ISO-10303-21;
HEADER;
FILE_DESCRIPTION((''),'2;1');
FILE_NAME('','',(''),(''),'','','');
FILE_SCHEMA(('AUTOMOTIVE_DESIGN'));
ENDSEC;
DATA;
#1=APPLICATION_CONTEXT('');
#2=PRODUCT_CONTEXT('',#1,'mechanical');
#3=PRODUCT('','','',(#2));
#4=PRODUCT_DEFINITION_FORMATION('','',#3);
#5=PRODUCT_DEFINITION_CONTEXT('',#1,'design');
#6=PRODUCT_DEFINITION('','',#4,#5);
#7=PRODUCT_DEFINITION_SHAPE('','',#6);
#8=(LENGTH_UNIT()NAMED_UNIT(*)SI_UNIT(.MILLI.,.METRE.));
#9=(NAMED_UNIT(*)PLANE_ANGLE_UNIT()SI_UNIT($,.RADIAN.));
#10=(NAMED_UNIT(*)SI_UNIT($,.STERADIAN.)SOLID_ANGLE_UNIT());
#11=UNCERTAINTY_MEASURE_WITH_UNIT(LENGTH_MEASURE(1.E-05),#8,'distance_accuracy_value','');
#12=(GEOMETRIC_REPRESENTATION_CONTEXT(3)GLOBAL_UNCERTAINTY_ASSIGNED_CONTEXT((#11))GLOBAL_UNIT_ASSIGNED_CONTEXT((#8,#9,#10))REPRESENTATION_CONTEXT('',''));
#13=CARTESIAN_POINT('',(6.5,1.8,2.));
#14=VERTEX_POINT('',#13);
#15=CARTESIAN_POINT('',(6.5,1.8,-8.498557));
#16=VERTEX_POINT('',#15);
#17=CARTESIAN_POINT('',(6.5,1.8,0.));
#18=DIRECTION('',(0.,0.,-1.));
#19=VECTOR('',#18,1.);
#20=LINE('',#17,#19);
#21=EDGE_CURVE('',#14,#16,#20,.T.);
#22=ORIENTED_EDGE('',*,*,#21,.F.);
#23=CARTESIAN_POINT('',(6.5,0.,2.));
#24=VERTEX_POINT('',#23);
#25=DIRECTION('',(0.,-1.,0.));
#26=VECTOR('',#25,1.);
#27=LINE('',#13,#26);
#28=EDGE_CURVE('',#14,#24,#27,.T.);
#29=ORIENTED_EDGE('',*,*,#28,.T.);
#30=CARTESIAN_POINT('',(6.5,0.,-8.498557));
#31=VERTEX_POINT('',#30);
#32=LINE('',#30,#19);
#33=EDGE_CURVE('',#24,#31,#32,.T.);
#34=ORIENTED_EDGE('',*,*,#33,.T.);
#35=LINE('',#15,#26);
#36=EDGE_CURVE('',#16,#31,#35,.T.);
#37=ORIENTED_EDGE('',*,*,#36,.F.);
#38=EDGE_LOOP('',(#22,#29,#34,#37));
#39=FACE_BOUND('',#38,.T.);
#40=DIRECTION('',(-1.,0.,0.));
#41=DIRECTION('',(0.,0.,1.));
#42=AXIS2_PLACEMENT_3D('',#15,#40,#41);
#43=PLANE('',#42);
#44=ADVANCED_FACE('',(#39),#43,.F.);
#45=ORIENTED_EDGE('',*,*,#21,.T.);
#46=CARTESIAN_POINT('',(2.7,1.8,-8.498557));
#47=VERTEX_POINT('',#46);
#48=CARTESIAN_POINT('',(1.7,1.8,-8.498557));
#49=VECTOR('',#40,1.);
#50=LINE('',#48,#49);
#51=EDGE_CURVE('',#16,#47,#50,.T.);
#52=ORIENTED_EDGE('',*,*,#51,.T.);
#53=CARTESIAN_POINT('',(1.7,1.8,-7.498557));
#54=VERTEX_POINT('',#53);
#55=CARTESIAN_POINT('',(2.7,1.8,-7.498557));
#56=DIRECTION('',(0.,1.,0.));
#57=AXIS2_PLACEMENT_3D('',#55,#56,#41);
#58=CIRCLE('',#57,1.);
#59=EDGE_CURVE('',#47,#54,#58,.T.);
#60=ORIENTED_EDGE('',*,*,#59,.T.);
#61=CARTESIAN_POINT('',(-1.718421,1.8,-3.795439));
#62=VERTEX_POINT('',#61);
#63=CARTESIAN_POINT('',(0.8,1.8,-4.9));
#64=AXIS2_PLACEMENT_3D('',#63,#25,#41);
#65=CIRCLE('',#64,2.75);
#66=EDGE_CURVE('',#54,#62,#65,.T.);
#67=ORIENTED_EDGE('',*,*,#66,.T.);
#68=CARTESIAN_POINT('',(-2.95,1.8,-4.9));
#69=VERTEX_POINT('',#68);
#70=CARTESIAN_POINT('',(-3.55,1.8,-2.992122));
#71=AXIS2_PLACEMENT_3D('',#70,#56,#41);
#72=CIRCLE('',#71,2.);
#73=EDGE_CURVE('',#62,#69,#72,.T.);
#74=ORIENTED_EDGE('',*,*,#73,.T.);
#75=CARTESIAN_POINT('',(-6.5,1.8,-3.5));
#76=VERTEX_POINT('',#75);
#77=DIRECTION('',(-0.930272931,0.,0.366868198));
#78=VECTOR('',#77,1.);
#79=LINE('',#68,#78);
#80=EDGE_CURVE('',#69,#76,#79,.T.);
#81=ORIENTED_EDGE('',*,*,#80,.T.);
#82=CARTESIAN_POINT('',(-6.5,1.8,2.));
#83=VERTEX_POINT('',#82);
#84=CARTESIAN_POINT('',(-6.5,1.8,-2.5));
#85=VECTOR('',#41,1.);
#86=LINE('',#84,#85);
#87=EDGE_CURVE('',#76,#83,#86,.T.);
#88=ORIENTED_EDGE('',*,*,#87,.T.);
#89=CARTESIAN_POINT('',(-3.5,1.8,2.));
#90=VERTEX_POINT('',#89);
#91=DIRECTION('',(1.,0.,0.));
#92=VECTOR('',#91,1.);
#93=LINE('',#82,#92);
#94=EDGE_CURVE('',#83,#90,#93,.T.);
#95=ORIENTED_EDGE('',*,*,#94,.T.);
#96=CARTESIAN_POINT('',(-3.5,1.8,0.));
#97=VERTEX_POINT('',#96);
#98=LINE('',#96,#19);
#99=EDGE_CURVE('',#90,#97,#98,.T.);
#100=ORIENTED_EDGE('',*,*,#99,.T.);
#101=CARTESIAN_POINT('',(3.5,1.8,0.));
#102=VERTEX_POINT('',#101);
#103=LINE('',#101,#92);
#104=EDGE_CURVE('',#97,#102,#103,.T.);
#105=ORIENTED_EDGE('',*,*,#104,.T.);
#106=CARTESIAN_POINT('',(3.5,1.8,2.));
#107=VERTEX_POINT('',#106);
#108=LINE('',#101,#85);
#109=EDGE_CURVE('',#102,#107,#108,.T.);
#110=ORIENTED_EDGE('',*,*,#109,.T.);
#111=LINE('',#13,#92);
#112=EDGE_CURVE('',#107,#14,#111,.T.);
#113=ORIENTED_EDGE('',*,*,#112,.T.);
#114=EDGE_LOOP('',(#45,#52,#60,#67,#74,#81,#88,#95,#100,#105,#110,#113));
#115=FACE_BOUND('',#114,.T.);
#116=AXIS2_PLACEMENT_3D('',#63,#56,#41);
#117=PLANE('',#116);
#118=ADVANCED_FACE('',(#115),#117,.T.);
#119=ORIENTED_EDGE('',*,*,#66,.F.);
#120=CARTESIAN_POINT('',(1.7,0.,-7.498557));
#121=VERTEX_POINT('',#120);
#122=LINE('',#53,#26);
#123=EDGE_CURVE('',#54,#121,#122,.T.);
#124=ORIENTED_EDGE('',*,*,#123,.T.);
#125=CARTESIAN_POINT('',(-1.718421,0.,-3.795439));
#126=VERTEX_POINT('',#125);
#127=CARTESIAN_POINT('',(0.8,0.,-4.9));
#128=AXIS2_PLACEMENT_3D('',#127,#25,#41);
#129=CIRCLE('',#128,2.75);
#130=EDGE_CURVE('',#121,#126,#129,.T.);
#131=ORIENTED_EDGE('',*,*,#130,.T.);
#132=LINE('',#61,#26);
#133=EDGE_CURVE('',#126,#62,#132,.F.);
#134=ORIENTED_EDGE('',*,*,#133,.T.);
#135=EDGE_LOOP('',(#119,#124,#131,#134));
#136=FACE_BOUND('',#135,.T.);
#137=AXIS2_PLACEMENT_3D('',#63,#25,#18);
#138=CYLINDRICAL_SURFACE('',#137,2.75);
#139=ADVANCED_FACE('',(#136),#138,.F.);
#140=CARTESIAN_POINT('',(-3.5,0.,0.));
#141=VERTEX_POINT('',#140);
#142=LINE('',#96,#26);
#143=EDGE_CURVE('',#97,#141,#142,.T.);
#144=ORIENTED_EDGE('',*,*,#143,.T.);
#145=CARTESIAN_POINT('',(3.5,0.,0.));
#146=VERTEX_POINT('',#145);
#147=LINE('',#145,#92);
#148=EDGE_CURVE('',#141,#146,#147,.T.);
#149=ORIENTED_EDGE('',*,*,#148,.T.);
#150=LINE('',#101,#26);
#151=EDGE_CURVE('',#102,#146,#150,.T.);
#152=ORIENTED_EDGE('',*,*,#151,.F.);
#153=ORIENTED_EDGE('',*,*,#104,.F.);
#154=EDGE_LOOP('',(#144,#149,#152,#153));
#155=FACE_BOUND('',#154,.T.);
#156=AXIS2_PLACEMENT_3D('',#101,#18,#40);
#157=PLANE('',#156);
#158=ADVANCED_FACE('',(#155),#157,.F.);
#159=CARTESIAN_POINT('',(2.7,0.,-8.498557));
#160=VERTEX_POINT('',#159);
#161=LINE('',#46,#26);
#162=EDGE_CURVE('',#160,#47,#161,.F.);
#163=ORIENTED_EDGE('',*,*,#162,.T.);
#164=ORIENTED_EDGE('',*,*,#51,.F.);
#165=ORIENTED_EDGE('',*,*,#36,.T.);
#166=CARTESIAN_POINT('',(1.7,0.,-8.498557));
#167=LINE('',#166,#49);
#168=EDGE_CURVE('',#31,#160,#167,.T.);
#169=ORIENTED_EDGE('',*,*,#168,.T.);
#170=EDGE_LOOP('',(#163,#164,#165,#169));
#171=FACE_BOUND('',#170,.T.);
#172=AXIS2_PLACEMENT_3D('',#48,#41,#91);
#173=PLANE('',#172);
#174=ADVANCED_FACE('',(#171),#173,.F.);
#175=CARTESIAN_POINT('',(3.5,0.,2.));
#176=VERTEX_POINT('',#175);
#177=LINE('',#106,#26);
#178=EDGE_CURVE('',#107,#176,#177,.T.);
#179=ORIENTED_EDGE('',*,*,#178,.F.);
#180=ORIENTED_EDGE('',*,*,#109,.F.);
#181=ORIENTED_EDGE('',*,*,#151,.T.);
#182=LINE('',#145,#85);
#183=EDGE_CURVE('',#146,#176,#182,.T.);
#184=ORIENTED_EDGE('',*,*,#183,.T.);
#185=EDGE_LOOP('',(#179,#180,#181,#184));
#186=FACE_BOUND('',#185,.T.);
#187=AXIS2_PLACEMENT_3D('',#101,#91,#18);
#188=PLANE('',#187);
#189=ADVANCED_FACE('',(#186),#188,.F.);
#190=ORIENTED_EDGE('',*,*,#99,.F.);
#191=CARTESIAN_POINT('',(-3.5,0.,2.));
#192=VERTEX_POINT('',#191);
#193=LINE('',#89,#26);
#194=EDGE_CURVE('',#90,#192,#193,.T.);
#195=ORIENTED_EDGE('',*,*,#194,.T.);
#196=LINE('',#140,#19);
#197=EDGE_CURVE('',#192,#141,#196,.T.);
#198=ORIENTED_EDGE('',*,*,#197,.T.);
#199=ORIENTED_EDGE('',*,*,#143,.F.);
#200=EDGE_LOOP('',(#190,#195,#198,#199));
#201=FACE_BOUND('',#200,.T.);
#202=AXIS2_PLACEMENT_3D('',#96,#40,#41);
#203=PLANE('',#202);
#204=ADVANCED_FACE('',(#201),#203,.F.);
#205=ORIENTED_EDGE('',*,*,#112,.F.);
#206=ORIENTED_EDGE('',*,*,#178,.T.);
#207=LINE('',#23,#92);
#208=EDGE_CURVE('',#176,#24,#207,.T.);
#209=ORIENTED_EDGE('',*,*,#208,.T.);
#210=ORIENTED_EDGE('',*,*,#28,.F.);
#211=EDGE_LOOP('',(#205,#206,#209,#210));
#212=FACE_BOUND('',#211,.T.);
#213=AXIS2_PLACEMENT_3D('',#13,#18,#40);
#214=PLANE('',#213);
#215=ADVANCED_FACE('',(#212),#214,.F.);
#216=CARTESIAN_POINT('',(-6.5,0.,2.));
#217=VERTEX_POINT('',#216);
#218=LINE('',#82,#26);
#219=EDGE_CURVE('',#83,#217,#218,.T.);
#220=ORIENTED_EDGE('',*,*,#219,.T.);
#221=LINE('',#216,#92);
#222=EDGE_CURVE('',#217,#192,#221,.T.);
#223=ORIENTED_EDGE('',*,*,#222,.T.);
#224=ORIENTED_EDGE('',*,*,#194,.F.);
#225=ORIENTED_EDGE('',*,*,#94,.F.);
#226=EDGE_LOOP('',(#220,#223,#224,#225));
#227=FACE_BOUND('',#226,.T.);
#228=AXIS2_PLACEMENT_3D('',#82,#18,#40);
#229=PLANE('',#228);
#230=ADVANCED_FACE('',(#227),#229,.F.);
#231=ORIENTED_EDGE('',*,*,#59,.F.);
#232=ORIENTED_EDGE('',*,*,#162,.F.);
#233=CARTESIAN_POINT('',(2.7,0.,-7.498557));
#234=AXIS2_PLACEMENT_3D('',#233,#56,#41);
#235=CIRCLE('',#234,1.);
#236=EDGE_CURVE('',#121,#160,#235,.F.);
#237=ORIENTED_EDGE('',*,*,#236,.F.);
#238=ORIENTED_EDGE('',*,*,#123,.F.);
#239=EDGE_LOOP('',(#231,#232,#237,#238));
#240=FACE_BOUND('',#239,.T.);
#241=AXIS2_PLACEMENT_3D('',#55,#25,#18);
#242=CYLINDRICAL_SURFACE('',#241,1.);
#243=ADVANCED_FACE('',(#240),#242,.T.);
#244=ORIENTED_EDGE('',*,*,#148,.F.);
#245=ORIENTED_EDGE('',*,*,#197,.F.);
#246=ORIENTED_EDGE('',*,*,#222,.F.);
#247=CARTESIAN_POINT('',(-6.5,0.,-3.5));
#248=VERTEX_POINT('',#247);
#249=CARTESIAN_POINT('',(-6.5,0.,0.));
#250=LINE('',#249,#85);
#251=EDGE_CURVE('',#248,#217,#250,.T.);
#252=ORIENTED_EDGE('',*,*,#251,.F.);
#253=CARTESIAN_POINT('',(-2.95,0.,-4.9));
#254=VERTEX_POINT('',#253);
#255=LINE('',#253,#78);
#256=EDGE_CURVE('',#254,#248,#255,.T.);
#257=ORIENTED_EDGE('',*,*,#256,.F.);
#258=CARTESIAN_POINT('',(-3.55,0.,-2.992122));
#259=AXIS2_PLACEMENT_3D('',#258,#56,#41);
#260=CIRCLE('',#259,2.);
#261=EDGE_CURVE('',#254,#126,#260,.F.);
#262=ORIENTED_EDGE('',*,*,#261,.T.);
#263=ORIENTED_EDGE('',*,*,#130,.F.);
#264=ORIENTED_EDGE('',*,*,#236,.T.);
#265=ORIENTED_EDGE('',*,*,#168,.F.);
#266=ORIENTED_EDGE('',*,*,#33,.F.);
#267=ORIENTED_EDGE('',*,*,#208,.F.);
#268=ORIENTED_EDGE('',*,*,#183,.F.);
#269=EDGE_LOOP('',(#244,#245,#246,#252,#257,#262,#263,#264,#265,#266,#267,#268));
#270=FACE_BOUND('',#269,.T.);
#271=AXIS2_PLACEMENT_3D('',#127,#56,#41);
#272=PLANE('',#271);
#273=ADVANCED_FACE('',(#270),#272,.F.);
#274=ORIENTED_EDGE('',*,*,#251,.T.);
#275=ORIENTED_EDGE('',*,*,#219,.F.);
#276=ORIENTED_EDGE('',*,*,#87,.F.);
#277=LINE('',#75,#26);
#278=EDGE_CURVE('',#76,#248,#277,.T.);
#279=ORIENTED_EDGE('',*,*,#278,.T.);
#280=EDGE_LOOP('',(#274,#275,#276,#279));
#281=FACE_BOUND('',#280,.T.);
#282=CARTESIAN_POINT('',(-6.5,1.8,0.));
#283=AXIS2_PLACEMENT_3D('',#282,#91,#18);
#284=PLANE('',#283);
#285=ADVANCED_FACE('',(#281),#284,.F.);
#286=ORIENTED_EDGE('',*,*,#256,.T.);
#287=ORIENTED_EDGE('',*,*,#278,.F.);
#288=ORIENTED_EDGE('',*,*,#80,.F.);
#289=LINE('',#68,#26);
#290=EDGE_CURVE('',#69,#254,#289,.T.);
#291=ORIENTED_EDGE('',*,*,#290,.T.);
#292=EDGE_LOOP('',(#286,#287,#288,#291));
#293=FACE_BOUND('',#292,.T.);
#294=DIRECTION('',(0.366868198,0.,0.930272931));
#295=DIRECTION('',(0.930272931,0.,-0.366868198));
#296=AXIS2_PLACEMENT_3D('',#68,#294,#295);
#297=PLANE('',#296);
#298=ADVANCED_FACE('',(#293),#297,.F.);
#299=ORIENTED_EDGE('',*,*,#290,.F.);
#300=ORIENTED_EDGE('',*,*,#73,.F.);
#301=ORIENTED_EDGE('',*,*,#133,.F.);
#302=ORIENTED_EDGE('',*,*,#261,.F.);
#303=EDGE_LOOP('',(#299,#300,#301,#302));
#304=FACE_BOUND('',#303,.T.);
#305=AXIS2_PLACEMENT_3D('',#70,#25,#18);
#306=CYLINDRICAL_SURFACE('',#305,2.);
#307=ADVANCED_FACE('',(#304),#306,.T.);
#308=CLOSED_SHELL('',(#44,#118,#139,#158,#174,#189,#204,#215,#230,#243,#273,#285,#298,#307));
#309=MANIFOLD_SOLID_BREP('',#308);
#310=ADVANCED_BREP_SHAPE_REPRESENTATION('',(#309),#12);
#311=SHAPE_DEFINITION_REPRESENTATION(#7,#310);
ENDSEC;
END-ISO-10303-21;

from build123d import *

# Parameters (mm, degrees)
BOSS_EXTRUDE1_DEPTH = 1.8
FILLET1_R           = 2
FILLET3_R           = 1


# Some blends are built 0.0001 mm under size
with BuildPart() as part:
    # Sketch1 → Boss-Extrude1 (new body)
    with BuildSketch(Plane(origin=(0, 0, 0), x_dir=(1, 0, 0), z_dir=(0, 1, 0))):
        with BuildLine():
            Line((6.5, 2.5), (6.5, 0))
            Line((6.5, 0), (6.5, -2))
            Line((6.5, -2), (3.5, -2))
            Line((3.5, -2), (3.5, 0))
            Line((3.5, 0), (-3.5, 0))
            Line((-3.5, 0), (-3.5, -2))
            Line((-3.5, -2), (-6.5, -2))
            Line((-6.5, -2), (-6.5, 0))
            Line((-6.5, 0), (-6.5, 2.5))
            Line((-6.5, 2.5), (-6.5, 3.5))
            Line((-6.5, 3.5), (-2.95, 4.9))
            Line((-2.95, 4.9), (-1.95, 4.9))
            ThreePointArc((-1.95, 4.9), (0.286343304, 2.198397365), (3.358114035, 3.890766339))
            ThreePointArc((3.358114035, 3.890766339), (3.298735092, 6.048400165), (1.7, 7.498557292))
            Line((1.7, 7.498557292), (1.7, 8.498557292))
            Line((1.7, 8.498557292), (6.5, 8.498557292))
            Line((6.5, 8.498557292), (6.5, 4.9))
            Line((6.5, 4.9), (6.5, 2.5))
        make_face()
    extrude(amount=BOSS_EXTRUDE1_DEPTH)

    # Fillet1
    # the kernel refuses this fillet: 2 mm, written as the material it takes off along each edge
    with BuildSketch(Plane(origin=(-1.95, -2.821440468, -4.9), x_dir=(0.20519567041703063, 0, 0.9787209698591859), z_dir=(0, 1, 0))) as fillet1_piece_1:
        with BuildLine():
            CenterArc((1.538967528, -1.95744194), FILLET1_R, 101.840953646, 48.860489585)
            Line((-0.20519567, -0.97872097), (-0.240078934, -0.95914655))
            ThreePointArc((-0.240078934, -0.95914655), (-0.141746674, -0.481152658), (-0.039148839, 0.008207827))
            Line((-0.039148839, 0.008207827), (0.008207827, 0.039148839))
            ThreePointArc((0.008207827, 0.039148839), (0.564288094, -0.018517333), (1.12036836, 0.039148839))
            Line((1.12036836, 0.039148839), (1.128576187, 0))
        make_face()
    extrude(amount=7.442880936, mode=Mode.SUBTRACT)

    # Fillet3
    fillet3_edges = [part.edges().sort_by_distance(p)[0] for p in [
        (1.7, 0.9, -8.498557292),
    ]]
    fillet(fillet3_edges, radius=FILLET3_R - 0.0001)  # a hair under: the kernel refuses the full size


solid = part.part
